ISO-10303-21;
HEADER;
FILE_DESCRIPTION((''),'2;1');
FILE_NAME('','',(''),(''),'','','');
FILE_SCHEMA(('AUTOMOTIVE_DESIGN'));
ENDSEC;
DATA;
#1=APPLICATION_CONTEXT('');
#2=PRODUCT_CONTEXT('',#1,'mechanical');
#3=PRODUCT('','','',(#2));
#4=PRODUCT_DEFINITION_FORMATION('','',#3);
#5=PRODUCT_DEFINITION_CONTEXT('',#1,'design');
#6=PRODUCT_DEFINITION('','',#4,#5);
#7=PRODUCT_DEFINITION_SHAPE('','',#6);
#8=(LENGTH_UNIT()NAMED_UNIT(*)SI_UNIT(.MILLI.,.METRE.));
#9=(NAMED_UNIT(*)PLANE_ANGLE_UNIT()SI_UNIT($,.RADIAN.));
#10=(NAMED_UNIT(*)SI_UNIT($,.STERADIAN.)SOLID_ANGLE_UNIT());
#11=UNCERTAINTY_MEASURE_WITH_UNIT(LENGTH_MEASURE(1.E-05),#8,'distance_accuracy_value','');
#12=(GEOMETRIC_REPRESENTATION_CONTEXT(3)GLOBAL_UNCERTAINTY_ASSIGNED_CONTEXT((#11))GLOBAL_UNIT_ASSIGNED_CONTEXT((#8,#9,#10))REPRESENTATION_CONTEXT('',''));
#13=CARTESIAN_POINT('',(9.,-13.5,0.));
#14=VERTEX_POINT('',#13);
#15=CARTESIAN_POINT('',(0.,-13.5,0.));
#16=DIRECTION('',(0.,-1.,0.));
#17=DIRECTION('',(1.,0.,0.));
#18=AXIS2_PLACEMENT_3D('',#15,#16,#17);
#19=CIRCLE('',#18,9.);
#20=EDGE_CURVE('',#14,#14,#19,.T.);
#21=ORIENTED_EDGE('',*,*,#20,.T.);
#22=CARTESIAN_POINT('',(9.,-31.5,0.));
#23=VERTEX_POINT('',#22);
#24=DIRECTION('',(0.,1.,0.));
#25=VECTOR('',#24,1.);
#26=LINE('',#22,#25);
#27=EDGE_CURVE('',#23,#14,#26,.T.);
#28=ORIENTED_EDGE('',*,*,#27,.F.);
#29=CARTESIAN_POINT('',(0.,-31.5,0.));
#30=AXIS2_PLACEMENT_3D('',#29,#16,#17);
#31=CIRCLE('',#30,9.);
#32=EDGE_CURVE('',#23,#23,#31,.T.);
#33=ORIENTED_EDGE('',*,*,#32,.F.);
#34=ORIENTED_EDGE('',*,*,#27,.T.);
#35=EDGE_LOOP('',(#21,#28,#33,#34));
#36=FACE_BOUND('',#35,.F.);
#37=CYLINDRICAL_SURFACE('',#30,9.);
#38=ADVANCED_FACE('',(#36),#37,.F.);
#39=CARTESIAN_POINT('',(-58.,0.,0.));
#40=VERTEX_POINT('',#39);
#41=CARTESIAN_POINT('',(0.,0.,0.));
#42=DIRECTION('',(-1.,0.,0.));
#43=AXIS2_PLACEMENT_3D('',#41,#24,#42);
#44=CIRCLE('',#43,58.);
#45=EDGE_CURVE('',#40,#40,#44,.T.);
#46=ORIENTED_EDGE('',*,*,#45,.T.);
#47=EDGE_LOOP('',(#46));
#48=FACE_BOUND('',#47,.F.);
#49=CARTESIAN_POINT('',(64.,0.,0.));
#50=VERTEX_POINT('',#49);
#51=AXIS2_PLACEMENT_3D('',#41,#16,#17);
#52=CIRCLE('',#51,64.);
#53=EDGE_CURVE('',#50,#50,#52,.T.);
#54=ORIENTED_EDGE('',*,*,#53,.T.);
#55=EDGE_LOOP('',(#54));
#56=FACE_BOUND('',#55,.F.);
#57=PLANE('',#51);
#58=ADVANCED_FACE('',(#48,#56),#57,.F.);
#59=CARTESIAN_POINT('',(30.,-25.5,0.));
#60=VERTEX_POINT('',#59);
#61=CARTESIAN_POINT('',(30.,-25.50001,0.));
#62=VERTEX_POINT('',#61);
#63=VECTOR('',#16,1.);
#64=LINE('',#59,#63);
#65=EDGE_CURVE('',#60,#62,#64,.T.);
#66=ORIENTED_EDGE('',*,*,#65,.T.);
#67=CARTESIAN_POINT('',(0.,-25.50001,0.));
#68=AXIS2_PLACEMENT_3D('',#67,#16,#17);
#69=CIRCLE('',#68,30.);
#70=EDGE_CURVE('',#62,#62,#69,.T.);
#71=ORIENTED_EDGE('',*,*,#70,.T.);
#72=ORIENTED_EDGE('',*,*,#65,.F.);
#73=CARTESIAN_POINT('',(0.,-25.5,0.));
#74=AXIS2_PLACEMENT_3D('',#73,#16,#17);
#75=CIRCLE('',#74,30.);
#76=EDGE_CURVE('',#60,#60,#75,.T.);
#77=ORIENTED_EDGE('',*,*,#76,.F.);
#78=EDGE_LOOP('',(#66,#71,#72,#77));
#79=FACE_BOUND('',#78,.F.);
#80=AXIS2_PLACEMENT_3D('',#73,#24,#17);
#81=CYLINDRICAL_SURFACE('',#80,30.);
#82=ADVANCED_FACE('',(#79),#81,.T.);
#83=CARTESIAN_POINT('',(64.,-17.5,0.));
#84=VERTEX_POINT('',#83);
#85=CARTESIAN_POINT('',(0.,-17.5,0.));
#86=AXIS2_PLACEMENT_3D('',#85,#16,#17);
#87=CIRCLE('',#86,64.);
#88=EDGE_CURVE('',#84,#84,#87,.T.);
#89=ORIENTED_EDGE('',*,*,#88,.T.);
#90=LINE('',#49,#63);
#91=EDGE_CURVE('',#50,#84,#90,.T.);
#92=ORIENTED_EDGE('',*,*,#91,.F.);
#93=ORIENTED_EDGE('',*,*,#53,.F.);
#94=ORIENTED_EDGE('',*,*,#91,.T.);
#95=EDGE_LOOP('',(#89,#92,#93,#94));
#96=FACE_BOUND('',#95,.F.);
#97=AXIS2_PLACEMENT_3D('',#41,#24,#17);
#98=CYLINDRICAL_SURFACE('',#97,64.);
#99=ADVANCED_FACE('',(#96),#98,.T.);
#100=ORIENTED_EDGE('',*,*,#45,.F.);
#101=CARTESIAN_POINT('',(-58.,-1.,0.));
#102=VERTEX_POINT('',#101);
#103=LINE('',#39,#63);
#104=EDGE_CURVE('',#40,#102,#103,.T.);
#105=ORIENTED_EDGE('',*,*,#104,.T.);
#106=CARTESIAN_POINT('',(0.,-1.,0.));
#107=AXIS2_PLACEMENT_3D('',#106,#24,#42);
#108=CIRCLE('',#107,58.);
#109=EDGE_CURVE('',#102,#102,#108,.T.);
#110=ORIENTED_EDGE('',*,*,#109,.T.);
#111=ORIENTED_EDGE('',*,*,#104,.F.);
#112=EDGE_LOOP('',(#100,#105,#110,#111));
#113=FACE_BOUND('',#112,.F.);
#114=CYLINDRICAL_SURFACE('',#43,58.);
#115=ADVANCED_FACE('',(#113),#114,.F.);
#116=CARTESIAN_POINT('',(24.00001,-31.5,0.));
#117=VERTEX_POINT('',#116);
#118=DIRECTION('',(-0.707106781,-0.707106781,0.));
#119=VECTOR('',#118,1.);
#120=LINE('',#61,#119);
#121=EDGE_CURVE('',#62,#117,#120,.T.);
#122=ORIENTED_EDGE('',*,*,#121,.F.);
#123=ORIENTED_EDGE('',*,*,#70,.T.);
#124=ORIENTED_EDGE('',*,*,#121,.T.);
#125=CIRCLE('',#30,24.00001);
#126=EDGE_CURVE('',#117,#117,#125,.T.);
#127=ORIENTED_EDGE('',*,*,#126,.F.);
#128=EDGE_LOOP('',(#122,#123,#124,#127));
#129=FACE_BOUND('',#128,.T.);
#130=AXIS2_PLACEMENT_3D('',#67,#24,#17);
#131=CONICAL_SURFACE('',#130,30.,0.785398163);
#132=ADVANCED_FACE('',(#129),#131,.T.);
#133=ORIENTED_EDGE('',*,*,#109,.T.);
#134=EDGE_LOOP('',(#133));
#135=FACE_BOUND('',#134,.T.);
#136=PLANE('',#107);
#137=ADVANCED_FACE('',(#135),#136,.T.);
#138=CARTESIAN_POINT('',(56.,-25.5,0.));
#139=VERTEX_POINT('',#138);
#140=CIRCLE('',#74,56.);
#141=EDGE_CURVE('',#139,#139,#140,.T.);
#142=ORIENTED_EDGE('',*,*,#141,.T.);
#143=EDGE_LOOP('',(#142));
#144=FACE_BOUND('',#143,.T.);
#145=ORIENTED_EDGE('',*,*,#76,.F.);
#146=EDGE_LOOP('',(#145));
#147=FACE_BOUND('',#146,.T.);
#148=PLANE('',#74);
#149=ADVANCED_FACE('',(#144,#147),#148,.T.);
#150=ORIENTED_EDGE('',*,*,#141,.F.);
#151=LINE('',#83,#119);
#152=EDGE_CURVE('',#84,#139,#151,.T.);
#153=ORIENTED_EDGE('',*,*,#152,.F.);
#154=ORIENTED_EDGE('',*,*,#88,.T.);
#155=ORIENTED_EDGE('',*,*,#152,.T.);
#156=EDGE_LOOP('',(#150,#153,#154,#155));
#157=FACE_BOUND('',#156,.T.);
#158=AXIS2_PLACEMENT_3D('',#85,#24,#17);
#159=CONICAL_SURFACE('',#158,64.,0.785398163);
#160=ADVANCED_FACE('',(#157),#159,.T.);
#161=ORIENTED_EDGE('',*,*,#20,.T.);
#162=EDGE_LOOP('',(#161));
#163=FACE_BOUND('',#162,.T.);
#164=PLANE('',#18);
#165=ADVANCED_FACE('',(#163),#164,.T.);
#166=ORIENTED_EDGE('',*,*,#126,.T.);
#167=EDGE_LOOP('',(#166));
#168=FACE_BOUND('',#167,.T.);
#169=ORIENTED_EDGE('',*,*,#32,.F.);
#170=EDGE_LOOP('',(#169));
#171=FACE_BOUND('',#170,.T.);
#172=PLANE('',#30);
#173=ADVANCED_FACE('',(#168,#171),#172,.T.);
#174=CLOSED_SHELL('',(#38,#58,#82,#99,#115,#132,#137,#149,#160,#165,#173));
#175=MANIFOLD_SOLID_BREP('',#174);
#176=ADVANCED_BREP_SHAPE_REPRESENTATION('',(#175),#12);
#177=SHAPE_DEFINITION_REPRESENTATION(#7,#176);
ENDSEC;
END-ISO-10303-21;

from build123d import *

# Parameters (mm, degrees)
F0_R      = 64
F1_DEPTH  = 25.5
F2_R      = 58
F3_DEPTH  = 1
F4_SIZE   = 8
F5_R      = 30
F6_DEPTH  = 6
F7_SIZE   = 5.99999
F9_R      = 9
F10_DEPTH = 18


# Not quite as in the source:
# - a fillet or chamfer is up to 0.001 mm smaller than in the source, because OpenCascade refuses the exact size


with BuildPart() as f1:
    # F0 (on Front) → F1 (new body)
    with BuildSketch(Plane.XZ):
        Circle(F0_R)
    extrude(amount=F1_DEPTH)

    # F2 (on face) → F3 (cut)
    with BuildSketch(Plane(origin=(0, 0, 0), x_dir=(-1, 0, 0), z_dir=(0, 1, 0))):
        Circle(F2_R)
    extrude(amount=-F3_DEPTH, mode=Mode.SUBTRACT)

    # F4
    f4_edges = [f1.edges().sort_by_distance(p)[0] for p in [
        (-64, -25.5, 0),
    ]]
    chamfer(f4_edges, length=F4_SIZE)

    # F5 (on face) → F6 (join)
    with BuildSketch(Plane.XZ.offset(25.5)):
        Circle(F5_R)
    extrude(amount=F6_DEPTH)

    # F7 (size 6 in the source; OpenCascade refuses exactly that, so slightly less here)
    f7_edges = [f1.edges().sort_by_distance(p)[0] for p in [
        (-30, -31.5, 0),
    ]]
    chamfer(f7_edges, length=F7_SIZE)

    # F9 (on face) → F10 (cut)
    with BuildSketch(Plane.XZ.offset(31.5)):
        Circle(F9_R)
    extrude(amount=-F10_DEPTH, mode=Mode.SUBTRACT)


solid = f1.part
